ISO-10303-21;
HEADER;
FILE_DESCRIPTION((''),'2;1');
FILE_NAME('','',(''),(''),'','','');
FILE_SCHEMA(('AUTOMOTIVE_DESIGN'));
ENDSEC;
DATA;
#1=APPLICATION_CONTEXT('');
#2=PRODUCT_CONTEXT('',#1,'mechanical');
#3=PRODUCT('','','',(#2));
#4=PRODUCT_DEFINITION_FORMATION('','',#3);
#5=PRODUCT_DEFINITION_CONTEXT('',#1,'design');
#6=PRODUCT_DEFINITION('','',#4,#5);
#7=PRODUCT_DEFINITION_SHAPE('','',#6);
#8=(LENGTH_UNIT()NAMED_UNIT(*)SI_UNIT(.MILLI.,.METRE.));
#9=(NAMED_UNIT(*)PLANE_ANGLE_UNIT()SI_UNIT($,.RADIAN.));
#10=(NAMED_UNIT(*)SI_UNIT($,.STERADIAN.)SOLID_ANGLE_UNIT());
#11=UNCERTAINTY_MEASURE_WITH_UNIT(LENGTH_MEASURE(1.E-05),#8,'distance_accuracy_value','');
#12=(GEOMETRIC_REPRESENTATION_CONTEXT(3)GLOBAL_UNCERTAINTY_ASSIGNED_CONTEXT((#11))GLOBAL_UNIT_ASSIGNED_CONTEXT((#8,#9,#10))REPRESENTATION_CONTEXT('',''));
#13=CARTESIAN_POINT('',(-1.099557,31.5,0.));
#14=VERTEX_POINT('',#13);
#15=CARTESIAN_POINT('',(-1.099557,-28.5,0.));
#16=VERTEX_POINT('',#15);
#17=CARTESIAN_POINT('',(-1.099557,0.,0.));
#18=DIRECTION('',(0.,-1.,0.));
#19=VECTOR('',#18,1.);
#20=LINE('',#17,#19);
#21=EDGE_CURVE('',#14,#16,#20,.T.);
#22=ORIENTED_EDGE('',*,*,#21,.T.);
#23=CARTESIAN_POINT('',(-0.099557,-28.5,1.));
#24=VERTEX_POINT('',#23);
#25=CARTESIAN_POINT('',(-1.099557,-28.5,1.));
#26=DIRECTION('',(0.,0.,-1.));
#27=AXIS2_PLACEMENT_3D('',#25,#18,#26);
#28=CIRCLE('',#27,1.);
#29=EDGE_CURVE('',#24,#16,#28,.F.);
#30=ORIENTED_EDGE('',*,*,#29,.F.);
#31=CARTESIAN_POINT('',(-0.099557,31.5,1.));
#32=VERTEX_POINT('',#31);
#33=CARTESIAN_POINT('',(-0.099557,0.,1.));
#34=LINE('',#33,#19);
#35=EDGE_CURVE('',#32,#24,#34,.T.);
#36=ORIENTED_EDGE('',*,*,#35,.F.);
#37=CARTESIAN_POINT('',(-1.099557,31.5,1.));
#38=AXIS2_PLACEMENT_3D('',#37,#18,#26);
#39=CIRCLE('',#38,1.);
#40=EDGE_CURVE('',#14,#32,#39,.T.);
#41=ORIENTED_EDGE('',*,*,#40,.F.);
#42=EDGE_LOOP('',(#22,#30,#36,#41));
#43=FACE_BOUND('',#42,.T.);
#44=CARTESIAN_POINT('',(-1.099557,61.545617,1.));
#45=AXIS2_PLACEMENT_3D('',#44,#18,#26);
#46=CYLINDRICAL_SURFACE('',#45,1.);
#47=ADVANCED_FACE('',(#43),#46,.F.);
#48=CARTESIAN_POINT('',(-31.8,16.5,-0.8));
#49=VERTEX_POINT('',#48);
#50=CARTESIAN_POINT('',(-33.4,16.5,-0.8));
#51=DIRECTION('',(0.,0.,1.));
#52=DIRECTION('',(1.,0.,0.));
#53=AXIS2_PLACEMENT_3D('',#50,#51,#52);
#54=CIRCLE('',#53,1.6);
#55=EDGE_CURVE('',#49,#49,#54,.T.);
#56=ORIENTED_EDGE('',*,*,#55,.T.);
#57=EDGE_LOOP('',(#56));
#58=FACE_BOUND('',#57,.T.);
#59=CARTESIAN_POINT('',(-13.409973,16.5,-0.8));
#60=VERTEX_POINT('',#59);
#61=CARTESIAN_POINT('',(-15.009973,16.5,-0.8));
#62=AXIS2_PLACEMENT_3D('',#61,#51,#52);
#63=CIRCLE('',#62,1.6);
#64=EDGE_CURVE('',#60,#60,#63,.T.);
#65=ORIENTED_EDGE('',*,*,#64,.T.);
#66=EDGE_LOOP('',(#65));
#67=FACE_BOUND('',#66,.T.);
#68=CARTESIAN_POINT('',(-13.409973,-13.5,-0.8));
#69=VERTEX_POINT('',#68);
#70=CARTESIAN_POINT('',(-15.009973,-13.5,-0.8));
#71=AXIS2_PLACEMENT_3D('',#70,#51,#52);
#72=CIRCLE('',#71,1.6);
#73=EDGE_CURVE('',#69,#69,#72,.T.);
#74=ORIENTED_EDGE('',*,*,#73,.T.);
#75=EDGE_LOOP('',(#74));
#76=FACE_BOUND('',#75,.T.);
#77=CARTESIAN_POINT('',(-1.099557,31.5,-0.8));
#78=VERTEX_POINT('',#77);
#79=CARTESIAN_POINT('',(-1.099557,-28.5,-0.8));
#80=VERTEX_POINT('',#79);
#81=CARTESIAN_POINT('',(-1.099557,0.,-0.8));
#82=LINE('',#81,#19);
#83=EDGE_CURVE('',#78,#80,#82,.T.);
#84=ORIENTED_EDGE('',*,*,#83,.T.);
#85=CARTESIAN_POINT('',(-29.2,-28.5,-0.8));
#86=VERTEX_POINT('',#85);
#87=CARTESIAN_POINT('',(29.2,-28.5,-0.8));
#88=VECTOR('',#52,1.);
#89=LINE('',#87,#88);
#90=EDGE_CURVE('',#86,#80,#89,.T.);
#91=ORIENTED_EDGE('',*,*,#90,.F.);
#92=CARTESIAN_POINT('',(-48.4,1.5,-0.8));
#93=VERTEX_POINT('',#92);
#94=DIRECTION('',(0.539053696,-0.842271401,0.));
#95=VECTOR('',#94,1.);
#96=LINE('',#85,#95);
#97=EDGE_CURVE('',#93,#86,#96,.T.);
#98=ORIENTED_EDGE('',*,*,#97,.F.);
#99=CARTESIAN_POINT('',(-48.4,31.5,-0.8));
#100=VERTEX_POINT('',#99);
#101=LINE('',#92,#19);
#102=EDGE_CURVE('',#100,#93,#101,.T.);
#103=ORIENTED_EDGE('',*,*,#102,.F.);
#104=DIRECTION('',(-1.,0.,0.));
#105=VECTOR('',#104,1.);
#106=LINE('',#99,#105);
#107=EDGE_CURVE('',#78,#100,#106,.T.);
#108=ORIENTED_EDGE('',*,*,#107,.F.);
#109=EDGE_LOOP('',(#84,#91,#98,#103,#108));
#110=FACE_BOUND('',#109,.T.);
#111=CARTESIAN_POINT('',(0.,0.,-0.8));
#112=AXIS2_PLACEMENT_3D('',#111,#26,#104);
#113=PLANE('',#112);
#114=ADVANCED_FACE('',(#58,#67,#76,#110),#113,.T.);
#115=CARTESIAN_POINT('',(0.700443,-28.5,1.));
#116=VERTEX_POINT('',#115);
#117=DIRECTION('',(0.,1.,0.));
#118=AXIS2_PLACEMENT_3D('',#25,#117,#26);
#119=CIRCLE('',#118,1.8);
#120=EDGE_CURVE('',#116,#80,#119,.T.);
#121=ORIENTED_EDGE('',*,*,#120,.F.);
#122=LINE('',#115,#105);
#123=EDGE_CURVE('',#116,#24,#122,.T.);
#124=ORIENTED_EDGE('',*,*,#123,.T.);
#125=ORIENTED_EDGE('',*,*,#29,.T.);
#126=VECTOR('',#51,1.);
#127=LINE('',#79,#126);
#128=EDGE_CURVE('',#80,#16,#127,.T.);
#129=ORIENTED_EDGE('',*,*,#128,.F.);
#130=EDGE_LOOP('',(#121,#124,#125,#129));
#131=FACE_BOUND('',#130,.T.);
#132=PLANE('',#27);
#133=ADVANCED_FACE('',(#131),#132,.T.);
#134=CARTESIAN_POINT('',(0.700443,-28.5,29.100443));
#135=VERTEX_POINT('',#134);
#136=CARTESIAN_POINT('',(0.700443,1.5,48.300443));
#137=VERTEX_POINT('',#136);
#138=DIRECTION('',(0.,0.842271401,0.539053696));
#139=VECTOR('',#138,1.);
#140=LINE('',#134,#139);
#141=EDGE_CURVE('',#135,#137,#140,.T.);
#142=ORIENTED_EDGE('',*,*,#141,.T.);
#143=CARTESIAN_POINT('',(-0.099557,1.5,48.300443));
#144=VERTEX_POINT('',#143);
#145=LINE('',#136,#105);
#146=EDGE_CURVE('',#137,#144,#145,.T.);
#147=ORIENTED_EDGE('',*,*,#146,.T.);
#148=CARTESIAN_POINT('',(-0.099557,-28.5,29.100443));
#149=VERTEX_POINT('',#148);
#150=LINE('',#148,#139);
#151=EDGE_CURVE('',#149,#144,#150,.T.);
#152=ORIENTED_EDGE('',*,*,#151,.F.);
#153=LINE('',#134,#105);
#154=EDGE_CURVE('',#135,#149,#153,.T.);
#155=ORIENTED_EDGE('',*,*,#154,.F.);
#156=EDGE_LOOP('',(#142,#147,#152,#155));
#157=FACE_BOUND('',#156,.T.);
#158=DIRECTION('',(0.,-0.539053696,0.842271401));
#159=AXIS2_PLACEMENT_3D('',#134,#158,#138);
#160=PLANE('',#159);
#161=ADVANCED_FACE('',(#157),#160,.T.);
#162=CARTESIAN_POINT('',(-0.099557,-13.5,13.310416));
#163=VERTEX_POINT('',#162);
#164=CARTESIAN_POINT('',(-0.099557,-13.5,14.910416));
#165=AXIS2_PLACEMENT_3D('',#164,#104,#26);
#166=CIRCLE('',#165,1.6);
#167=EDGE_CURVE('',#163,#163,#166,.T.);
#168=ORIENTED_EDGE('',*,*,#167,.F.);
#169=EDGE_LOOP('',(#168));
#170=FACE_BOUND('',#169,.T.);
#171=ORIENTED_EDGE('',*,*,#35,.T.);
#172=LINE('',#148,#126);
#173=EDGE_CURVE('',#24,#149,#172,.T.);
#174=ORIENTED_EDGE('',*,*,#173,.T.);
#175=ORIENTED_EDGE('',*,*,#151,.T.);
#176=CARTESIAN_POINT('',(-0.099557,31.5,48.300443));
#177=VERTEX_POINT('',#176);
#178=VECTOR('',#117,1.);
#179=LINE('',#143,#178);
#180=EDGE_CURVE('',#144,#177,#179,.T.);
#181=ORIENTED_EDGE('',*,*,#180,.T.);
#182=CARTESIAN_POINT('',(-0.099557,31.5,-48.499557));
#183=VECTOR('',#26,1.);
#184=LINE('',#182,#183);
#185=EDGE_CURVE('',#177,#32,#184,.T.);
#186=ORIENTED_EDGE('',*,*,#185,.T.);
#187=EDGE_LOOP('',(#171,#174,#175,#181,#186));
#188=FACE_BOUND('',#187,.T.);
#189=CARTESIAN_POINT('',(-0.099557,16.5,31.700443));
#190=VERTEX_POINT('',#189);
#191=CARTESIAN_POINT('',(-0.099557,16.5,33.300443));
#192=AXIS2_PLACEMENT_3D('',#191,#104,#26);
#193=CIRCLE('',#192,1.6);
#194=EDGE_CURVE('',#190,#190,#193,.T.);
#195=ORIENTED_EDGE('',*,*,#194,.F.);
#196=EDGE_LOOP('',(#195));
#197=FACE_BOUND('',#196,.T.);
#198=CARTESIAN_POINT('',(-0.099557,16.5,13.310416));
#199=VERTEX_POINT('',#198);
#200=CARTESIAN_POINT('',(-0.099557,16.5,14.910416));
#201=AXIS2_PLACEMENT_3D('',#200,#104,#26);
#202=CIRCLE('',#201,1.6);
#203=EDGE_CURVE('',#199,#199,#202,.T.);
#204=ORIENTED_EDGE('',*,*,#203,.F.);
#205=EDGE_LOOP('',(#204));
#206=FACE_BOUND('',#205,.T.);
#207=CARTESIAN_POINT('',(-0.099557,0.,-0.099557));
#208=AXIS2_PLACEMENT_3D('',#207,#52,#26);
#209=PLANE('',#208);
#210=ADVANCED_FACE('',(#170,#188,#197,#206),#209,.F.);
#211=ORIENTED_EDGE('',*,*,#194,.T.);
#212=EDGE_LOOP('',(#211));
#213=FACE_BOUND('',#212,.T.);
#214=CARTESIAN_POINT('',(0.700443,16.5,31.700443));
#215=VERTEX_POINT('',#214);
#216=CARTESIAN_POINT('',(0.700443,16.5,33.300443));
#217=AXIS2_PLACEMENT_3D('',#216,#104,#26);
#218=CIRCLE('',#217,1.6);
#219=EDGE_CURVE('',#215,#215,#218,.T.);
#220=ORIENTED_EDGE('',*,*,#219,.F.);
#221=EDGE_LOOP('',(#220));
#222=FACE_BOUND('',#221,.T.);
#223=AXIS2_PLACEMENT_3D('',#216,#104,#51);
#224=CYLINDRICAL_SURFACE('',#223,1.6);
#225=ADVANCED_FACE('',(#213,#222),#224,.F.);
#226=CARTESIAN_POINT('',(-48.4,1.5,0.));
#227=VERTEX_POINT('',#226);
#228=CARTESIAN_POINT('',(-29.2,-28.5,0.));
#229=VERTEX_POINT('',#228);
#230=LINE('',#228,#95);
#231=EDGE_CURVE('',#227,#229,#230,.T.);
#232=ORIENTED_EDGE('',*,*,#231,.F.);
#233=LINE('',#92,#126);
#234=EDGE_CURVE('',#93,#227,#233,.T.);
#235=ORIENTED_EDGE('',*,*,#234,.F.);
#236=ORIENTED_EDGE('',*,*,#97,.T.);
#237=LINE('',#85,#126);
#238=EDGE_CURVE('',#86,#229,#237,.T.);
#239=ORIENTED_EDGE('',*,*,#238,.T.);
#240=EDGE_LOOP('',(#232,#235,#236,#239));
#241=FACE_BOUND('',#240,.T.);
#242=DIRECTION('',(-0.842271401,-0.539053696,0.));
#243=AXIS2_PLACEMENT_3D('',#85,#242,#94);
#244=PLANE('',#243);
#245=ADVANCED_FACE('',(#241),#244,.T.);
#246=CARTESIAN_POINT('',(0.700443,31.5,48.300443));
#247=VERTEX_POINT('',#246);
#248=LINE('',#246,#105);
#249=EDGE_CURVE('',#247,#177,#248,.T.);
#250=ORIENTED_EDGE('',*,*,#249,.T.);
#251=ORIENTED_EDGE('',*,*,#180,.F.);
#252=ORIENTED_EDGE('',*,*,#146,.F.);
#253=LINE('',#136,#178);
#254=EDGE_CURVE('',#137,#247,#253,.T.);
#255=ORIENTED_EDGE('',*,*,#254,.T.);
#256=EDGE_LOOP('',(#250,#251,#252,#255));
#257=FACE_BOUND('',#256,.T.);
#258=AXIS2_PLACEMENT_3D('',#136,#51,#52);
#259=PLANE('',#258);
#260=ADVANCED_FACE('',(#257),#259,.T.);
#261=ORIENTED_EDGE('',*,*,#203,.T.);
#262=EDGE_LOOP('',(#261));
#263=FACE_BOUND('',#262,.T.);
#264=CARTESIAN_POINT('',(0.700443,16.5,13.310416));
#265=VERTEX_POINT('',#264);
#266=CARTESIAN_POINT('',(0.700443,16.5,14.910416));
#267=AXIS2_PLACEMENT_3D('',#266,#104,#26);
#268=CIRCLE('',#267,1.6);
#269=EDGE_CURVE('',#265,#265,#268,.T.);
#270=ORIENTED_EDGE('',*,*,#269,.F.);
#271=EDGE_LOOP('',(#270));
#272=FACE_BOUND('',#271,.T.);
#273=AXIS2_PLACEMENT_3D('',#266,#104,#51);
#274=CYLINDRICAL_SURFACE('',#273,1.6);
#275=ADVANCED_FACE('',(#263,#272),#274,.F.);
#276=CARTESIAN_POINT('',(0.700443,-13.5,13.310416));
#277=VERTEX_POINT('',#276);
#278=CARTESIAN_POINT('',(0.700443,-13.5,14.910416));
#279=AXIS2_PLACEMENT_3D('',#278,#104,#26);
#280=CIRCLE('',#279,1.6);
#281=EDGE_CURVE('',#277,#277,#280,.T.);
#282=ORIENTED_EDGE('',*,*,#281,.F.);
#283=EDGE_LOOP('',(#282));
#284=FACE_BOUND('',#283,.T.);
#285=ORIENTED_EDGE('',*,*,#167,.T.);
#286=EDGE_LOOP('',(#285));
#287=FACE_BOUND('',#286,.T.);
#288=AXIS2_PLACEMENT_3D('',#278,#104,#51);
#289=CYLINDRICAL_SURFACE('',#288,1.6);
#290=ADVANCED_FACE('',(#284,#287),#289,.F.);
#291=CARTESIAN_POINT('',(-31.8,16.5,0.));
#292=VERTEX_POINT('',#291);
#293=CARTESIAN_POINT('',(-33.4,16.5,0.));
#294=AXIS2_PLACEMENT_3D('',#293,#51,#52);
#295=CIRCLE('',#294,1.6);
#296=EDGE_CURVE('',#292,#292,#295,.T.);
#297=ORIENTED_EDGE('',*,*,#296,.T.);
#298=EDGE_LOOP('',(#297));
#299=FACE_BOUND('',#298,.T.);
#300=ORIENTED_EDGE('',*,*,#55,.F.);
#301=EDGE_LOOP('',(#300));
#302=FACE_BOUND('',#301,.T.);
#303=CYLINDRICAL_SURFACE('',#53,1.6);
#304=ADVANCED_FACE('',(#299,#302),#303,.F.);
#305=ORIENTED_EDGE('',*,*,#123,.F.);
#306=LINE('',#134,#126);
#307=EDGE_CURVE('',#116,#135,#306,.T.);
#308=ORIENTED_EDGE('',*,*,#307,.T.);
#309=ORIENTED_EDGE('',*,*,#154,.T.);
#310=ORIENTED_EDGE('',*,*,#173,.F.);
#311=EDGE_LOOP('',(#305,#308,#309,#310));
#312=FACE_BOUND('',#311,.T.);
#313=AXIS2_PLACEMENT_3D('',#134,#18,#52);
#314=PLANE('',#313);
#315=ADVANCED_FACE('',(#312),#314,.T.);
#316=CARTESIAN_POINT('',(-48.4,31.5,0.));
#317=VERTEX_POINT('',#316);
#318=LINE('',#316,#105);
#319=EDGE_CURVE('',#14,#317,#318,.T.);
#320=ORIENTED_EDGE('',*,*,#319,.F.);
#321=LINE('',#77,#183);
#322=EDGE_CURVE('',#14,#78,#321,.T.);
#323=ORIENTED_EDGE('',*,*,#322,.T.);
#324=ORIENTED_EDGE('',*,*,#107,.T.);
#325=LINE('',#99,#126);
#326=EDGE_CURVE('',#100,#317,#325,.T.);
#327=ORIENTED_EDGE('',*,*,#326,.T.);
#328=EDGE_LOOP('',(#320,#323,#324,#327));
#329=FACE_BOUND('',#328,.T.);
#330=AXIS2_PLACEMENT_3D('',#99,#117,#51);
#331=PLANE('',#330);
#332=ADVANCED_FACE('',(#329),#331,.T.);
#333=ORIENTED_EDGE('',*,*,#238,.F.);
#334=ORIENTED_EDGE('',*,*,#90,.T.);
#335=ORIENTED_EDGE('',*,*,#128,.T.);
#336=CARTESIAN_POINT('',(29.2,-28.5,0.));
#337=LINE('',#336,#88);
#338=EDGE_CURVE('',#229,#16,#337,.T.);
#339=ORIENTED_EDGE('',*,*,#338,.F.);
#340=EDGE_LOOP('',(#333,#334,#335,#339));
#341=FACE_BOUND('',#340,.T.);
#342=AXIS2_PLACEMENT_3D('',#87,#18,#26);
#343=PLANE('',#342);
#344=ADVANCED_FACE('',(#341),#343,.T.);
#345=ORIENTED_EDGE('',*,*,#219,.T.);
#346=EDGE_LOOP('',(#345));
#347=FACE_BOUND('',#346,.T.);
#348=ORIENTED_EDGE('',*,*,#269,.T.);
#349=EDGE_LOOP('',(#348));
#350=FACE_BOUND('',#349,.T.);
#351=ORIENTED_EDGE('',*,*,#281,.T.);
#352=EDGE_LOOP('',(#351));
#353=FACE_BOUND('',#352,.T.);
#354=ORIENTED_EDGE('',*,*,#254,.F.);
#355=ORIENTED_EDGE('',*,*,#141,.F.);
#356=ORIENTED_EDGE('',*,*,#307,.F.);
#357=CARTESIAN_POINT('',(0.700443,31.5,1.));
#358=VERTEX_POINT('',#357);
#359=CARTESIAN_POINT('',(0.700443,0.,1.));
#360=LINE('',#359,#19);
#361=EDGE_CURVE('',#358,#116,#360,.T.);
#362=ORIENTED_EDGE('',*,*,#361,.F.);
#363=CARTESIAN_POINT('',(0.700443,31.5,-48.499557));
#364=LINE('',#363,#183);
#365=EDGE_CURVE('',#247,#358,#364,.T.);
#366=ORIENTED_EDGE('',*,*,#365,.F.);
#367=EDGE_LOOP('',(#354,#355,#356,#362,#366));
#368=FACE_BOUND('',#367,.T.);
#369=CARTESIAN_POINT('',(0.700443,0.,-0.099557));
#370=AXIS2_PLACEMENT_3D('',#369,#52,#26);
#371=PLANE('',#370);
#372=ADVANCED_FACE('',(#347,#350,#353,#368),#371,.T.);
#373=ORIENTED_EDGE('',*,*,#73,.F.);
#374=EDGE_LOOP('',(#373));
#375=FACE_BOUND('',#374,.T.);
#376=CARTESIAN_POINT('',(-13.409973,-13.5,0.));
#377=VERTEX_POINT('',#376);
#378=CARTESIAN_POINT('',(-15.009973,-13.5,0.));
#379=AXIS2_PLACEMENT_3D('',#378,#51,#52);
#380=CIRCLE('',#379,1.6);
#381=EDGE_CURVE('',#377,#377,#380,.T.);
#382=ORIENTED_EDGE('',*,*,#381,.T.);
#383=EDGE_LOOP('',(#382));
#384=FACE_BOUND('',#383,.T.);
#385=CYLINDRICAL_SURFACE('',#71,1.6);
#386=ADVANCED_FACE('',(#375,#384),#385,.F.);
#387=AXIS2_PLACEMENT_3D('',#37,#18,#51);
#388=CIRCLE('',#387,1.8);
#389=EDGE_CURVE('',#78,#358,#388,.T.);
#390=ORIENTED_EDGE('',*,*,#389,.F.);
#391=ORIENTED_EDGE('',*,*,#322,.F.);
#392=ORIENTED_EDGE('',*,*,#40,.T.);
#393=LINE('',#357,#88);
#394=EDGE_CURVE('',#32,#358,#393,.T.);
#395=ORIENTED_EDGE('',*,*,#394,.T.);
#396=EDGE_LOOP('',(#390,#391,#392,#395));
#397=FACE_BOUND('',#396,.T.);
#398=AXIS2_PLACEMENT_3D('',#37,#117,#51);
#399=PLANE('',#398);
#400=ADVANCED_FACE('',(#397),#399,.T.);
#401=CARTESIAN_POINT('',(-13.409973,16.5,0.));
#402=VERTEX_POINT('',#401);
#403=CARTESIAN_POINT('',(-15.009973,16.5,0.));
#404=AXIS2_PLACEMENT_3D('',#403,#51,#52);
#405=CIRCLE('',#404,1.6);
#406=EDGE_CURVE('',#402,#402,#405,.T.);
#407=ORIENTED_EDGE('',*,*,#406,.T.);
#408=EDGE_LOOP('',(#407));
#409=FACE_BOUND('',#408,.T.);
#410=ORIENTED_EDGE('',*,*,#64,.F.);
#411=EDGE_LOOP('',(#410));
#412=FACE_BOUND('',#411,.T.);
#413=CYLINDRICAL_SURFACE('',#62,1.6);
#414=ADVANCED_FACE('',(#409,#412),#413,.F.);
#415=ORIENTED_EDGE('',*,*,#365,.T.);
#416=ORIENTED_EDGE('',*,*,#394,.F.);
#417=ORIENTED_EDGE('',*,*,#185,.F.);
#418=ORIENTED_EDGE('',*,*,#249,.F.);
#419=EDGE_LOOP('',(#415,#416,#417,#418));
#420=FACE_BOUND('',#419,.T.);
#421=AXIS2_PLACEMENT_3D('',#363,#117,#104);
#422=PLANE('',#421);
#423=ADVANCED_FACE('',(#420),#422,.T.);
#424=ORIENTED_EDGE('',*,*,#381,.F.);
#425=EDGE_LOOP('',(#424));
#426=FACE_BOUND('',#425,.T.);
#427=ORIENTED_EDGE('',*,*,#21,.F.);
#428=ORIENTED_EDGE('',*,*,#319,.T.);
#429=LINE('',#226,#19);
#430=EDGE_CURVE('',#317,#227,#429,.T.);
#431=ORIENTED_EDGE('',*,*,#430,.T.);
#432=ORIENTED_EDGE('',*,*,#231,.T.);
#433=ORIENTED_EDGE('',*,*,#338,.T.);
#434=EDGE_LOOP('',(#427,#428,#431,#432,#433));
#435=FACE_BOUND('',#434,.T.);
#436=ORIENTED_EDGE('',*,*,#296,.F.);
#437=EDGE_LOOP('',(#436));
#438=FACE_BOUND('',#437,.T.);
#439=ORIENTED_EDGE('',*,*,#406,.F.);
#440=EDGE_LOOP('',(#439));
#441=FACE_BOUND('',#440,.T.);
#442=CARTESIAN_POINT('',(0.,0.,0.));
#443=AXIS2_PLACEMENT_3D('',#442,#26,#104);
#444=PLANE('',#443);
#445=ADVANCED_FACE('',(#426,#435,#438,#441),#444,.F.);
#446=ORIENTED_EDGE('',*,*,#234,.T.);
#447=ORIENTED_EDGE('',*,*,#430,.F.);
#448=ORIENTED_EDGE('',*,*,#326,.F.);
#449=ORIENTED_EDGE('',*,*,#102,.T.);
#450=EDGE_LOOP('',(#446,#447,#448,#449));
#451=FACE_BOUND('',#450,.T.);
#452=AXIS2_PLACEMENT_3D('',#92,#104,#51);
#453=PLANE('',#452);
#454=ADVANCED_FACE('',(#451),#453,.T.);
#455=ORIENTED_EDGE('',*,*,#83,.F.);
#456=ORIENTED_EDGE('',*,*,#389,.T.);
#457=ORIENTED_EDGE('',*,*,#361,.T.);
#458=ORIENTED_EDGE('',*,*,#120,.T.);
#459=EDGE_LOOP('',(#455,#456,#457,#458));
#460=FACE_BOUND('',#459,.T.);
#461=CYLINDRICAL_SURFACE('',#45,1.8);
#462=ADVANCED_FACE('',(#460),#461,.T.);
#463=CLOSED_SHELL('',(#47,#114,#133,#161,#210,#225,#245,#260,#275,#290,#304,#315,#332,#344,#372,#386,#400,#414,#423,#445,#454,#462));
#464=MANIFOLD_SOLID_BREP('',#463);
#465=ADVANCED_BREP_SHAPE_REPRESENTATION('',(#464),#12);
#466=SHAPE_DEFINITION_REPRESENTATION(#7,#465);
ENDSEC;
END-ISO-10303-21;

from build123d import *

# Parameters (mm, degrees)
SKETCH3_R                  = 1.6
BASE_FLANGE1_DEPTH         = 0.8
SKETCHED_START             = 0.510326571
SKETCHED_BEND1_OUTLINE_W   = 60
SKETCHED_BEND1_OUTLINE_H   = 0.8
SKETCHED_BEND1_DEPTH       = 47.889673429
SKETCHED_START_2           = -1.099557429
SKETCHED_BEND1_2_OUTLINE_R = 1.6
SKETCHED_BEND1_2_DEPTH     = 1.8
SKETCHED_START_3           = -28.5
SKETCHED_BEND1_3_DEPTH     = 60


with BuildPart() as part:
    # Base-Flange1: sheet metal written as solids
    # Sketch3 → Base-Flange1 (new body)
    with BuildSketch(Plane.XY):
        Polygon((29.2, -28.5), (-29.2, -28.5), (-48.4, 1.5), (-48.4, 31.5), (48.4, 31.5), (48.4, 1.5), align=None)
        with Locations((-33.4, 16.5)):
            Circle(SKETCH3_R, mode=Mode.SUBTRACT)
        with Locations((-15.009973435, 16.5)):
            Circle(SKETCH3_R, mode=Mode.SUBTRACT)
        with Locations((-15.009973435, -13.5)):
            Circle(SKETCH3_R, mode=Mode.SUBTRACT)
        with Locations(Location((15.009973435, -13.5, 0), (0, 0, 180))):
            Circle(SKETCH3_R, mode=Mode.SUBTRACT)
        with Locations(Location((15.009973435, 16.5, 0), (0, 0, 180))):
            Circle(SKETCH3_R, mode=Mode.SUBTRACT)
        with Locations(Location((33.4, 16.5, 0), (0, 0, 180))):
            Circle(SKETCH3_R, mode=Mode.SUBTRACT)
    extrude(amount=-BASE_FLANGE1_DEPTH)

    # Sketched Bend1: read off the stored shape, not the designer's step
    # Sketched Bend1 outline → Sketched Bend1 (cut)
    with BuildSketch(Plane.YZ.offset(SKETCHED_START)):
        with Locations((1.5, -0.4)):
            Rectangle(SKETCHED_BEND1_OUTLINE_W, SKETCHED_BEND1_OUTLINE_H)
    extrude(amount=SKETCHED_BEND1_DEPTH, mode=Mode.SUBTRACT)

    # Sketched Bend1 2 outline → Sketched Bend1 2 (add)
    with BuildSketch(Plane.YZ.offset(SKETCHED_START_2)):
        Polygon((31.5, 0), (31.5, 48.300442571), (1.5, 48.300442571), (-28.5, 29.100442571), (-28.5, 0), align=None)
        with Locations((-13.5, 14.910416006)):
            Circle(SKETCHED_BEND1_2_OUTLINE_R, mode=Mode.SUBTRACT)
        with Locations((16.5, 14.910416006)):
            Circle(SKETCHED_BEND1_2_OUTLINE_R, mode=Mode.SUBTRACT)
        with Locations((16.5, 33.300442571)):
            Circle(SKETCHED_BEND1_2_OUTLINE_R, mode=Mode.SUBTRACT)
    extrude(amount=SKETCHED_BEND1_2_DEPTH)

    # Sketched Bend1 3 outline → Sketched Bend1 3 (cut)
    with BuildSketch(Plane(origin=(0, 0, 0), x_dir=(1, 0, 0), z_dir=(0, 1, 0)).offset(SKETCHED_START_3)):
        with BuildLine():
            Line((-1.099557429, -48.300442571), (-0.099557429, -48.300442571))
            Line((-0.099557429, -48.300442571), (-0.099557429, -1))
            ThreePointArc((-0.099557429, -1), (-0.392450648, -0.292893219), (-1.099557429, 0))
            Line((-1.099557429, 0), (-1.099557429, -48.300442571))
        make_face()
        with BuildLine():
            ThreePointArc((-1.099557429, 0.8), (0.173234777, 0.272792206), (0.700442571, -1))
            Line((0.700442571, -1), (0.700442571, 0))
            Line((0.700442571, 0), (0.510326571, 0))
            Line((0.510326571, 0), (0.510326571, 0.8))
            Line((0.510326571, 0.8), (-1.099557429, 0.8))
        make_face()
    extrude(amount=SKETCHED_BEND1_3_DEPTH, mode=Mode.SUBTRACT)


solid = part.part
